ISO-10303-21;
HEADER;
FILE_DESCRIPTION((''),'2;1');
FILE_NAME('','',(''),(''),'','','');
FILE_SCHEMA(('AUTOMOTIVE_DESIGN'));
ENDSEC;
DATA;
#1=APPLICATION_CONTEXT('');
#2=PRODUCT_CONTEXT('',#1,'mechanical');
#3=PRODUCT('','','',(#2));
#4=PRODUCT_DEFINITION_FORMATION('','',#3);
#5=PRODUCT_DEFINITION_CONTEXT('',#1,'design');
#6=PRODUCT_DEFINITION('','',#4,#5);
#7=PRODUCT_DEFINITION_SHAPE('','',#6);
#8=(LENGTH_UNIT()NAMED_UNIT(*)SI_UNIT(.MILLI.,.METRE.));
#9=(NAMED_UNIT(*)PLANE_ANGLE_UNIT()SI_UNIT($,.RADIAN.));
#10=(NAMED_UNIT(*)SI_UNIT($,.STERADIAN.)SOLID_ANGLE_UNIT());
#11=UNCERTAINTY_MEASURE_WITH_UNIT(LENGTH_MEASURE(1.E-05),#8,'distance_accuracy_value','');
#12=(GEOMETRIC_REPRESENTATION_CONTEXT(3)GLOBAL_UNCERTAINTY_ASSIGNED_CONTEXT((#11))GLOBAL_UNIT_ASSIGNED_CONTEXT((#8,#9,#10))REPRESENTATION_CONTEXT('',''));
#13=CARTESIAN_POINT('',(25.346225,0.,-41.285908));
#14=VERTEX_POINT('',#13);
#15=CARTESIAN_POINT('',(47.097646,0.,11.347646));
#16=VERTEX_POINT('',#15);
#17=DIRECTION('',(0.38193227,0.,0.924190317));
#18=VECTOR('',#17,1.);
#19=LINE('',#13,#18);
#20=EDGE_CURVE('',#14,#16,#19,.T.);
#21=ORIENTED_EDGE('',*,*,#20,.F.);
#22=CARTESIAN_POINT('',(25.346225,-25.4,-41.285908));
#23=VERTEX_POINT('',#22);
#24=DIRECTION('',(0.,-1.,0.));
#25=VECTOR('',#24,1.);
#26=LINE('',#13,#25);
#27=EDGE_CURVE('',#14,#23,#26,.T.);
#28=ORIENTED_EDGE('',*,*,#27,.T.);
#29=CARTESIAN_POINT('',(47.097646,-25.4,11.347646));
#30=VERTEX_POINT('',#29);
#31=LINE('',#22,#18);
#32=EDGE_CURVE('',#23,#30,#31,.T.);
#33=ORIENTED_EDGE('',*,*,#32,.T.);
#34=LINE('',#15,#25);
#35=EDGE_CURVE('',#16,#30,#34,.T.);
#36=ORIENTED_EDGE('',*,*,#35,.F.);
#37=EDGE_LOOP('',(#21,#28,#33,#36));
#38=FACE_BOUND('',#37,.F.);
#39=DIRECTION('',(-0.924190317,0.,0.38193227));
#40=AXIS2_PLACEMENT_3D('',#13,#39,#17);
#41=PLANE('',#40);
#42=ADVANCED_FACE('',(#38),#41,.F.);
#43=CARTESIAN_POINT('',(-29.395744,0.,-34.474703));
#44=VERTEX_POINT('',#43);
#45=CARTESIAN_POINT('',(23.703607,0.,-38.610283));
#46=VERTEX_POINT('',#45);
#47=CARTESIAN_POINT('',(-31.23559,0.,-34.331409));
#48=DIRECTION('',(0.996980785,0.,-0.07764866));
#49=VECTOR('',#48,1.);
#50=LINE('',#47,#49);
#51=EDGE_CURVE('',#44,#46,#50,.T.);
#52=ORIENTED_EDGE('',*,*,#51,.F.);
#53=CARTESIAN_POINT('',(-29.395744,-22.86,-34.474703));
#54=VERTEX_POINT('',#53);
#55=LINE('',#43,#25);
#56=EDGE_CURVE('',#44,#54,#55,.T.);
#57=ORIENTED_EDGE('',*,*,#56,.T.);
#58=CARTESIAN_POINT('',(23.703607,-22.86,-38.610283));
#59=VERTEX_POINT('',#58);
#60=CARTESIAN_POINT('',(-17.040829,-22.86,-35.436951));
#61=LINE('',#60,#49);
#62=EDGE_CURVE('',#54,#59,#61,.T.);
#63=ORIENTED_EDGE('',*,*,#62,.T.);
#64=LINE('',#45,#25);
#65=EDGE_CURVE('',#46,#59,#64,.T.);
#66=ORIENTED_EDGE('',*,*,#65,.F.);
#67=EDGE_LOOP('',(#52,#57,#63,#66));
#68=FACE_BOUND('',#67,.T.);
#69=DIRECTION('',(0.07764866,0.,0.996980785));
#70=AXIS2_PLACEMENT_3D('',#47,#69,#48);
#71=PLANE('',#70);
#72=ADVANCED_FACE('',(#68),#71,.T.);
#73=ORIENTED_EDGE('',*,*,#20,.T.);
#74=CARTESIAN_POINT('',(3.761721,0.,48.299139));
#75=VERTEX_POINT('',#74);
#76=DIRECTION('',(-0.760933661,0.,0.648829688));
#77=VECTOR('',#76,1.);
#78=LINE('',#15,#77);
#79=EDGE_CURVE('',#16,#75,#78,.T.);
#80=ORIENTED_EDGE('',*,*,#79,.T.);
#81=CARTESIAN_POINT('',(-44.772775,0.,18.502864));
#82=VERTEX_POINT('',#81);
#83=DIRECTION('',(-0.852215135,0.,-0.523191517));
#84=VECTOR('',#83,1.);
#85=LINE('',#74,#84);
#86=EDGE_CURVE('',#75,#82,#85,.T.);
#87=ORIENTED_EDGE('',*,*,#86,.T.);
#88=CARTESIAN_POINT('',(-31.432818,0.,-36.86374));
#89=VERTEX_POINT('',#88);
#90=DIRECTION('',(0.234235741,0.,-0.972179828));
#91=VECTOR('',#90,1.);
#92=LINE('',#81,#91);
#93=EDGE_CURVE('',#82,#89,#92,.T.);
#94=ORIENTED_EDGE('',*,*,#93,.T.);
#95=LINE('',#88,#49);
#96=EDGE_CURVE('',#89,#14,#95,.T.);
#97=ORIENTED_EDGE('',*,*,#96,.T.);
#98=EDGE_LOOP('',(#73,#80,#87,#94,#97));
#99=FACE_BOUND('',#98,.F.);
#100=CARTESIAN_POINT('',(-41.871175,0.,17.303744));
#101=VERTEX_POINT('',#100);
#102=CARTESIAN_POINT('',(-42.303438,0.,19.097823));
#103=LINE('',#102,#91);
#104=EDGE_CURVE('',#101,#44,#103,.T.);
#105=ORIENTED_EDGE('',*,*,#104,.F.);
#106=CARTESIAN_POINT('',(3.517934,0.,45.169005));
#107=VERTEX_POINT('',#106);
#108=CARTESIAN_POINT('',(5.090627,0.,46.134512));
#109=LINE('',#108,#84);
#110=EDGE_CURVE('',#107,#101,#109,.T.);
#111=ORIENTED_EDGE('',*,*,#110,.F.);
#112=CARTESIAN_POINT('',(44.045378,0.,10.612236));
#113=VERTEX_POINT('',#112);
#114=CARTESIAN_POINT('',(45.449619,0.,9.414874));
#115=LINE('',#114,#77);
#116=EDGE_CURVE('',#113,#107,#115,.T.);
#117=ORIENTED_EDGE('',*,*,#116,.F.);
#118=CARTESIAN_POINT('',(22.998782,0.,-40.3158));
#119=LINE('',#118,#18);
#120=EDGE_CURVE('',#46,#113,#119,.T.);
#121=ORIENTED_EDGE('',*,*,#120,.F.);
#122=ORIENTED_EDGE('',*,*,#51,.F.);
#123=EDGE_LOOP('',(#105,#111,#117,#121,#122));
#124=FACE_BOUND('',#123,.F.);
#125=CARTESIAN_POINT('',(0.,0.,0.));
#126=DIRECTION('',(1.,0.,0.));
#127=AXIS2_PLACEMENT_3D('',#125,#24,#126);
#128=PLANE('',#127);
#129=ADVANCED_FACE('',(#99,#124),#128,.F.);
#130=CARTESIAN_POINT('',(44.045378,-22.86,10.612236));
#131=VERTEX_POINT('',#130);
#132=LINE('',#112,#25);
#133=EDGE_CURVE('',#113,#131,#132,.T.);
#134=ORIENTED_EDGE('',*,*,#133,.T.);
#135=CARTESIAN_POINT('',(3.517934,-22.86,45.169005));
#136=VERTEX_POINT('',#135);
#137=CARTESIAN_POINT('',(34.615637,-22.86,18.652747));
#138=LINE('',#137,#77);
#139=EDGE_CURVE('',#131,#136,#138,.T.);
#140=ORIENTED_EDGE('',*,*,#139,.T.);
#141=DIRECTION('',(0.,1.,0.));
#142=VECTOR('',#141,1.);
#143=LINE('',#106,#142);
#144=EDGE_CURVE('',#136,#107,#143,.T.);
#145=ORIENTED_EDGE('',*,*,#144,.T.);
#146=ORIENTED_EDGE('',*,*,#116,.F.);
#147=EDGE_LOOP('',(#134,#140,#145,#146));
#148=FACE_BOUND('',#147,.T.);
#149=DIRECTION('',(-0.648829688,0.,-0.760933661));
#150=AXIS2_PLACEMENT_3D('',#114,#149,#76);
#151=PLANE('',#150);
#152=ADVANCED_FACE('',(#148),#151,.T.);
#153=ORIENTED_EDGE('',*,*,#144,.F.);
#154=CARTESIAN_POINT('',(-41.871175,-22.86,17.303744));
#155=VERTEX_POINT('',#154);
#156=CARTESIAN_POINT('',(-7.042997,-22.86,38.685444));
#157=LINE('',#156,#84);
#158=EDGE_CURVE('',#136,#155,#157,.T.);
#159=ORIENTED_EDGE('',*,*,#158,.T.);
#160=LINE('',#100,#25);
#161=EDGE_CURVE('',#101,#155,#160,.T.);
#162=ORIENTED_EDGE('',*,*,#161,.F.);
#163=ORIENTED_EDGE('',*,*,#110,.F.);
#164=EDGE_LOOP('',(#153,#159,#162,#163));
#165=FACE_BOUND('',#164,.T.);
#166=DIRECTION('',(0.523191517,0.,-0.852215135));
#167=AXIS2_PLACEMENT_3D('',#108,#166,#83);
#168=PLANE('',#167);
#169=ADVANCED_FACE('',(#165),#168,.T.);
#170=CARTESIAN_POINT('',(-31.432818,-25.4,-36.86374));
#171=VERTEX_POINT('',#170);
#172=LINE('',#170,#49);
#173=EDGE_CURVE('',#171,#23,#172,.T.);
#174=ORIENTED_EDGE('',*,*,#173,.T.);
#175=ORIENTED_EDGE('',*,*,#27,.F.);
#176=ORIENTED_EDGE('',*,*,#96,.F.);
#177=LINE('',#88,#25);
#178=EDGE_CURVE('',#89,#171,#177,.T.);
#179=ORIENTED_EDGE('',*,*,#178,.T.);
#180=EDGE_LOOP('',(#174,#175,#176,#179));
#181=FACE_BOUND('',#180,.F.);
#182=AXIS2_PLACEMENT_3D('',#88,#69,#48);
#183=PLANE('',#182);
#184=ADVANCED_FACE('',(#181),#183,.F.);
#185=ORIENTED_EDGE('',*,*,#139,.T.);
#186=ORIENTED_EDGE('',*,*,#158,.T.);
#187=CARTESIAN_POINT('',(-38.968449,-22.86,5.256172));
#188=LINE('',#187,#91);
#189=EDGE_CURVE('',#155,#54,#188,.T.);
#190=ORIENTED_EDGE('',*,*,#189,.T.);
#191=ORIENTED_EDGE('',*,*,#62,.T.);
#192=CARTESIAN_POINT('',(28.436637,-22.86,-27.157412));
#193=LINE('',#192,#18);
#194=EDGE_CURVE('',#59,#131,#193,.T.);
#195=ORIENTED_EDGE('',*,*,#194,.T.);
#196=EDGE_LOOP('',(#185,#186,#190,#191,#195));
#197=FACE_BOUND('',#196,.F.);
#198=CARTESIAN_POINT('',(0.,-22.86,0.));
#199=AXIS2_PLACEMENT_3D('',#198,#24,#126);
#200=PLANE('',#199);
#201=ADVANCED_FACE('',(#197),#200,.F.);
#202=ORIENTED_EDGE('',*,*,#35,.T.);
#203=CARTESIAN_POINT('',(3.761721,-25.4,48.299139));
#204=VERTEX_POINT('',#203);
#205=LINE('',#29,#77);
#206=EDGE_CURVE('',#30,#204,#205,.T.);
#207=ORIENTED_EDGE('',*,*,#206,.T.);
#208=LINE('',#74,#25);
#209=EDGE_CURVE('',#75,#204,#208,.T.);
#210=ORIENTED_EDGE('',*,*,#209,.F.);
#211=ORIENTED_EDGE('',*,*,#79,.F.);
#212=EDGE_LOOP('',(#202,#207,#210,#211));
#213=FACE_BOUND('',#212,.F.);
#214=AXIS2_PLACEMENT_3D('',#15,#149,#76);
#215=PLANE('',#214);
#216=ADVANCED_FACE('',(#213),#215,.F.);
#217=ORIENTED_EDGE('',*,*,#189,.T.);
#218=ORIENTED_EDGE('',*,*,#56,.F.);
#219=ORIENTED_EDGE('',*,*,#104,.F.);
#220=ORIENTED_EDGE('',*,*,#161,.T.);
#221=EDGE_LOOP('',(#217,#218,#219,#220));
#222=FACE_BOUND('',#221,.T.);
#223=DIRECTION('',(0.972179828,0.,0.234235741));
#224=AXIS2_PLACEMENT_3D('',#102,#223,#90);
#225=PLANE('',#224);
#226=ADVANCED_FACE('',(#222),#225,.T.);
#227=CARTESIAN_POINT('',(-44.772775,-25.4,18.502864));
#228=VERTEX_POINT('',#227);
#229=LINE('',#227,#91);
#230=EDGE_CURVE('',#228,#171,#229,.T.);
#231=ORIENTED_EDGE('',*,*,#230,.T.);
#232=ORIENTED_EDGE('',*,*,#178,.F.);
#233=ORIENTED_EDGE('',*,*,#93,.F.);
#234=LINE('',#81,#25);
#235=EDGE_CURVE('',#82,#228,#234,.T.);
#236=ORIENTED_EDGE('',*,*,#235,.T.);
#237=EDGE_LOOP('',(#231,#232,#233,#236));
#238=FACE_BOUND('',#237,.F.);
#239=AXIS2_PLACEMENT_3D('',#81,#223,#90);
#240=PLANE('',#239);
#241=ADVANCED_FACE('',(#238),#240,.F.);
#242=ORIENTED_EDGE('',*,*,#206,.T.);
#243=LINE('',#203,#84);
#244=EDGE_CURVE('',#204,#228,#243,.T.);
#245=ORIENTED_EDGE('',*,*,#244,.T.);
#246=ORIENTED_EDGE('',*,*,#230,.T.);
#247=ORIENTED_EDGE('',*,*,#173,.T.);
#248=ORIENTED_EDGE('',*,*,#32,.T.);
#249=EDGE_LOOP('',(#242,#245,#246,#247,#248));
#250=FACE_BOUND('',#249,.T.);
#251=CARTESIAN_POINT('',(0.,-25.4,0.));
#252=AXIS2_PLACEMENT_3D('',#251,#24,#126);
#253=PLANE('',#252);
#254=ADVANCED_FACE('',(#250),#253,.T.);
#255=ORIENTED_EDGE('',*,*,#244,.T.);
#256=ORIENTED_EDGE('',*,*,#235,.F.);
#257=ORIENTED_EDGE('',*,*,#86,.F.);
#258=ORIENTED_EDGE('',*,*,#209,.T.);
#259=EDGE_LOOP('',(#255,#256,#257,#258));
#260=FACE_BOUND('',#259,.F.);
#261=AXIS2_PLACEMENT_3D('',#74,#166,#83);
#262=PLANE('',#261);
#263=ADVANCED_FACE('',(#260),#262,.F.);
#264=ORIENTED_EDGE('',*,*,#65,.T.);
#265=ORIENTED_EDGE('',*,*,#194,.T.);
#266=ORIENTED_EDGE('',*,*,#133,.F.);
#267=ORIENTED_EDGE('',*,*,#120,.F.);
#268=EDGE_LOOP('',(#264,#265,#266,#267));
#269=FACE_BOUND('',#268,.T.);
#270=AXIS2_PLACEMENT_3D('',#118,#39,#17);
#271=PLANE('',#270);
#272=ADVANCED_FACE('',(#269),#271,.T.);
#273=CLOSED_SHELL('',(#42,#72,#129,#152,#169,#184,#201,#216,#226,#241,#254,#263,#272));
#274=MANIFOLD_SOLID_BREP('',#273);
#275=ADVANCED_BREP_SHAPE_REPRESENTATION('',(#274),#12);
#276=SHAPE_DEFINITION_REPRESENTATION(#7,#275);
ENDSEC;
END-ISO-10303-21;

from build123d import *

# Parameters (mm, degrees)
F3_DEPTH = 25.4
F4_T     = -2.54


# Not quite as in the source:
# - the program builds the solid bodies; features that only make, move or delete a surface that nothing else refers to are left out


with BuildPart() as f3:
    # F2 (on Front) → F3 (new body)
    with BuildSketch(Plane.XZ):
        Polygon((3.7617208479, 48.2991386944), (-44.7727749167, 18.5028637951), (-31.4328175171, -36.8637399798), (25.346225329, -41.2859080551), (47.0976462569, 11.3476455454), align=None)
    extrude(amount=F3_DEPTH)

    # F4
    f4_openings = [f3.faces().sort_by_distance(p)[0] for p in [
        (0, 0, 0),
    ]]
    offset(amount=F4_T, openings=f4_openings)


solid = f3.part
